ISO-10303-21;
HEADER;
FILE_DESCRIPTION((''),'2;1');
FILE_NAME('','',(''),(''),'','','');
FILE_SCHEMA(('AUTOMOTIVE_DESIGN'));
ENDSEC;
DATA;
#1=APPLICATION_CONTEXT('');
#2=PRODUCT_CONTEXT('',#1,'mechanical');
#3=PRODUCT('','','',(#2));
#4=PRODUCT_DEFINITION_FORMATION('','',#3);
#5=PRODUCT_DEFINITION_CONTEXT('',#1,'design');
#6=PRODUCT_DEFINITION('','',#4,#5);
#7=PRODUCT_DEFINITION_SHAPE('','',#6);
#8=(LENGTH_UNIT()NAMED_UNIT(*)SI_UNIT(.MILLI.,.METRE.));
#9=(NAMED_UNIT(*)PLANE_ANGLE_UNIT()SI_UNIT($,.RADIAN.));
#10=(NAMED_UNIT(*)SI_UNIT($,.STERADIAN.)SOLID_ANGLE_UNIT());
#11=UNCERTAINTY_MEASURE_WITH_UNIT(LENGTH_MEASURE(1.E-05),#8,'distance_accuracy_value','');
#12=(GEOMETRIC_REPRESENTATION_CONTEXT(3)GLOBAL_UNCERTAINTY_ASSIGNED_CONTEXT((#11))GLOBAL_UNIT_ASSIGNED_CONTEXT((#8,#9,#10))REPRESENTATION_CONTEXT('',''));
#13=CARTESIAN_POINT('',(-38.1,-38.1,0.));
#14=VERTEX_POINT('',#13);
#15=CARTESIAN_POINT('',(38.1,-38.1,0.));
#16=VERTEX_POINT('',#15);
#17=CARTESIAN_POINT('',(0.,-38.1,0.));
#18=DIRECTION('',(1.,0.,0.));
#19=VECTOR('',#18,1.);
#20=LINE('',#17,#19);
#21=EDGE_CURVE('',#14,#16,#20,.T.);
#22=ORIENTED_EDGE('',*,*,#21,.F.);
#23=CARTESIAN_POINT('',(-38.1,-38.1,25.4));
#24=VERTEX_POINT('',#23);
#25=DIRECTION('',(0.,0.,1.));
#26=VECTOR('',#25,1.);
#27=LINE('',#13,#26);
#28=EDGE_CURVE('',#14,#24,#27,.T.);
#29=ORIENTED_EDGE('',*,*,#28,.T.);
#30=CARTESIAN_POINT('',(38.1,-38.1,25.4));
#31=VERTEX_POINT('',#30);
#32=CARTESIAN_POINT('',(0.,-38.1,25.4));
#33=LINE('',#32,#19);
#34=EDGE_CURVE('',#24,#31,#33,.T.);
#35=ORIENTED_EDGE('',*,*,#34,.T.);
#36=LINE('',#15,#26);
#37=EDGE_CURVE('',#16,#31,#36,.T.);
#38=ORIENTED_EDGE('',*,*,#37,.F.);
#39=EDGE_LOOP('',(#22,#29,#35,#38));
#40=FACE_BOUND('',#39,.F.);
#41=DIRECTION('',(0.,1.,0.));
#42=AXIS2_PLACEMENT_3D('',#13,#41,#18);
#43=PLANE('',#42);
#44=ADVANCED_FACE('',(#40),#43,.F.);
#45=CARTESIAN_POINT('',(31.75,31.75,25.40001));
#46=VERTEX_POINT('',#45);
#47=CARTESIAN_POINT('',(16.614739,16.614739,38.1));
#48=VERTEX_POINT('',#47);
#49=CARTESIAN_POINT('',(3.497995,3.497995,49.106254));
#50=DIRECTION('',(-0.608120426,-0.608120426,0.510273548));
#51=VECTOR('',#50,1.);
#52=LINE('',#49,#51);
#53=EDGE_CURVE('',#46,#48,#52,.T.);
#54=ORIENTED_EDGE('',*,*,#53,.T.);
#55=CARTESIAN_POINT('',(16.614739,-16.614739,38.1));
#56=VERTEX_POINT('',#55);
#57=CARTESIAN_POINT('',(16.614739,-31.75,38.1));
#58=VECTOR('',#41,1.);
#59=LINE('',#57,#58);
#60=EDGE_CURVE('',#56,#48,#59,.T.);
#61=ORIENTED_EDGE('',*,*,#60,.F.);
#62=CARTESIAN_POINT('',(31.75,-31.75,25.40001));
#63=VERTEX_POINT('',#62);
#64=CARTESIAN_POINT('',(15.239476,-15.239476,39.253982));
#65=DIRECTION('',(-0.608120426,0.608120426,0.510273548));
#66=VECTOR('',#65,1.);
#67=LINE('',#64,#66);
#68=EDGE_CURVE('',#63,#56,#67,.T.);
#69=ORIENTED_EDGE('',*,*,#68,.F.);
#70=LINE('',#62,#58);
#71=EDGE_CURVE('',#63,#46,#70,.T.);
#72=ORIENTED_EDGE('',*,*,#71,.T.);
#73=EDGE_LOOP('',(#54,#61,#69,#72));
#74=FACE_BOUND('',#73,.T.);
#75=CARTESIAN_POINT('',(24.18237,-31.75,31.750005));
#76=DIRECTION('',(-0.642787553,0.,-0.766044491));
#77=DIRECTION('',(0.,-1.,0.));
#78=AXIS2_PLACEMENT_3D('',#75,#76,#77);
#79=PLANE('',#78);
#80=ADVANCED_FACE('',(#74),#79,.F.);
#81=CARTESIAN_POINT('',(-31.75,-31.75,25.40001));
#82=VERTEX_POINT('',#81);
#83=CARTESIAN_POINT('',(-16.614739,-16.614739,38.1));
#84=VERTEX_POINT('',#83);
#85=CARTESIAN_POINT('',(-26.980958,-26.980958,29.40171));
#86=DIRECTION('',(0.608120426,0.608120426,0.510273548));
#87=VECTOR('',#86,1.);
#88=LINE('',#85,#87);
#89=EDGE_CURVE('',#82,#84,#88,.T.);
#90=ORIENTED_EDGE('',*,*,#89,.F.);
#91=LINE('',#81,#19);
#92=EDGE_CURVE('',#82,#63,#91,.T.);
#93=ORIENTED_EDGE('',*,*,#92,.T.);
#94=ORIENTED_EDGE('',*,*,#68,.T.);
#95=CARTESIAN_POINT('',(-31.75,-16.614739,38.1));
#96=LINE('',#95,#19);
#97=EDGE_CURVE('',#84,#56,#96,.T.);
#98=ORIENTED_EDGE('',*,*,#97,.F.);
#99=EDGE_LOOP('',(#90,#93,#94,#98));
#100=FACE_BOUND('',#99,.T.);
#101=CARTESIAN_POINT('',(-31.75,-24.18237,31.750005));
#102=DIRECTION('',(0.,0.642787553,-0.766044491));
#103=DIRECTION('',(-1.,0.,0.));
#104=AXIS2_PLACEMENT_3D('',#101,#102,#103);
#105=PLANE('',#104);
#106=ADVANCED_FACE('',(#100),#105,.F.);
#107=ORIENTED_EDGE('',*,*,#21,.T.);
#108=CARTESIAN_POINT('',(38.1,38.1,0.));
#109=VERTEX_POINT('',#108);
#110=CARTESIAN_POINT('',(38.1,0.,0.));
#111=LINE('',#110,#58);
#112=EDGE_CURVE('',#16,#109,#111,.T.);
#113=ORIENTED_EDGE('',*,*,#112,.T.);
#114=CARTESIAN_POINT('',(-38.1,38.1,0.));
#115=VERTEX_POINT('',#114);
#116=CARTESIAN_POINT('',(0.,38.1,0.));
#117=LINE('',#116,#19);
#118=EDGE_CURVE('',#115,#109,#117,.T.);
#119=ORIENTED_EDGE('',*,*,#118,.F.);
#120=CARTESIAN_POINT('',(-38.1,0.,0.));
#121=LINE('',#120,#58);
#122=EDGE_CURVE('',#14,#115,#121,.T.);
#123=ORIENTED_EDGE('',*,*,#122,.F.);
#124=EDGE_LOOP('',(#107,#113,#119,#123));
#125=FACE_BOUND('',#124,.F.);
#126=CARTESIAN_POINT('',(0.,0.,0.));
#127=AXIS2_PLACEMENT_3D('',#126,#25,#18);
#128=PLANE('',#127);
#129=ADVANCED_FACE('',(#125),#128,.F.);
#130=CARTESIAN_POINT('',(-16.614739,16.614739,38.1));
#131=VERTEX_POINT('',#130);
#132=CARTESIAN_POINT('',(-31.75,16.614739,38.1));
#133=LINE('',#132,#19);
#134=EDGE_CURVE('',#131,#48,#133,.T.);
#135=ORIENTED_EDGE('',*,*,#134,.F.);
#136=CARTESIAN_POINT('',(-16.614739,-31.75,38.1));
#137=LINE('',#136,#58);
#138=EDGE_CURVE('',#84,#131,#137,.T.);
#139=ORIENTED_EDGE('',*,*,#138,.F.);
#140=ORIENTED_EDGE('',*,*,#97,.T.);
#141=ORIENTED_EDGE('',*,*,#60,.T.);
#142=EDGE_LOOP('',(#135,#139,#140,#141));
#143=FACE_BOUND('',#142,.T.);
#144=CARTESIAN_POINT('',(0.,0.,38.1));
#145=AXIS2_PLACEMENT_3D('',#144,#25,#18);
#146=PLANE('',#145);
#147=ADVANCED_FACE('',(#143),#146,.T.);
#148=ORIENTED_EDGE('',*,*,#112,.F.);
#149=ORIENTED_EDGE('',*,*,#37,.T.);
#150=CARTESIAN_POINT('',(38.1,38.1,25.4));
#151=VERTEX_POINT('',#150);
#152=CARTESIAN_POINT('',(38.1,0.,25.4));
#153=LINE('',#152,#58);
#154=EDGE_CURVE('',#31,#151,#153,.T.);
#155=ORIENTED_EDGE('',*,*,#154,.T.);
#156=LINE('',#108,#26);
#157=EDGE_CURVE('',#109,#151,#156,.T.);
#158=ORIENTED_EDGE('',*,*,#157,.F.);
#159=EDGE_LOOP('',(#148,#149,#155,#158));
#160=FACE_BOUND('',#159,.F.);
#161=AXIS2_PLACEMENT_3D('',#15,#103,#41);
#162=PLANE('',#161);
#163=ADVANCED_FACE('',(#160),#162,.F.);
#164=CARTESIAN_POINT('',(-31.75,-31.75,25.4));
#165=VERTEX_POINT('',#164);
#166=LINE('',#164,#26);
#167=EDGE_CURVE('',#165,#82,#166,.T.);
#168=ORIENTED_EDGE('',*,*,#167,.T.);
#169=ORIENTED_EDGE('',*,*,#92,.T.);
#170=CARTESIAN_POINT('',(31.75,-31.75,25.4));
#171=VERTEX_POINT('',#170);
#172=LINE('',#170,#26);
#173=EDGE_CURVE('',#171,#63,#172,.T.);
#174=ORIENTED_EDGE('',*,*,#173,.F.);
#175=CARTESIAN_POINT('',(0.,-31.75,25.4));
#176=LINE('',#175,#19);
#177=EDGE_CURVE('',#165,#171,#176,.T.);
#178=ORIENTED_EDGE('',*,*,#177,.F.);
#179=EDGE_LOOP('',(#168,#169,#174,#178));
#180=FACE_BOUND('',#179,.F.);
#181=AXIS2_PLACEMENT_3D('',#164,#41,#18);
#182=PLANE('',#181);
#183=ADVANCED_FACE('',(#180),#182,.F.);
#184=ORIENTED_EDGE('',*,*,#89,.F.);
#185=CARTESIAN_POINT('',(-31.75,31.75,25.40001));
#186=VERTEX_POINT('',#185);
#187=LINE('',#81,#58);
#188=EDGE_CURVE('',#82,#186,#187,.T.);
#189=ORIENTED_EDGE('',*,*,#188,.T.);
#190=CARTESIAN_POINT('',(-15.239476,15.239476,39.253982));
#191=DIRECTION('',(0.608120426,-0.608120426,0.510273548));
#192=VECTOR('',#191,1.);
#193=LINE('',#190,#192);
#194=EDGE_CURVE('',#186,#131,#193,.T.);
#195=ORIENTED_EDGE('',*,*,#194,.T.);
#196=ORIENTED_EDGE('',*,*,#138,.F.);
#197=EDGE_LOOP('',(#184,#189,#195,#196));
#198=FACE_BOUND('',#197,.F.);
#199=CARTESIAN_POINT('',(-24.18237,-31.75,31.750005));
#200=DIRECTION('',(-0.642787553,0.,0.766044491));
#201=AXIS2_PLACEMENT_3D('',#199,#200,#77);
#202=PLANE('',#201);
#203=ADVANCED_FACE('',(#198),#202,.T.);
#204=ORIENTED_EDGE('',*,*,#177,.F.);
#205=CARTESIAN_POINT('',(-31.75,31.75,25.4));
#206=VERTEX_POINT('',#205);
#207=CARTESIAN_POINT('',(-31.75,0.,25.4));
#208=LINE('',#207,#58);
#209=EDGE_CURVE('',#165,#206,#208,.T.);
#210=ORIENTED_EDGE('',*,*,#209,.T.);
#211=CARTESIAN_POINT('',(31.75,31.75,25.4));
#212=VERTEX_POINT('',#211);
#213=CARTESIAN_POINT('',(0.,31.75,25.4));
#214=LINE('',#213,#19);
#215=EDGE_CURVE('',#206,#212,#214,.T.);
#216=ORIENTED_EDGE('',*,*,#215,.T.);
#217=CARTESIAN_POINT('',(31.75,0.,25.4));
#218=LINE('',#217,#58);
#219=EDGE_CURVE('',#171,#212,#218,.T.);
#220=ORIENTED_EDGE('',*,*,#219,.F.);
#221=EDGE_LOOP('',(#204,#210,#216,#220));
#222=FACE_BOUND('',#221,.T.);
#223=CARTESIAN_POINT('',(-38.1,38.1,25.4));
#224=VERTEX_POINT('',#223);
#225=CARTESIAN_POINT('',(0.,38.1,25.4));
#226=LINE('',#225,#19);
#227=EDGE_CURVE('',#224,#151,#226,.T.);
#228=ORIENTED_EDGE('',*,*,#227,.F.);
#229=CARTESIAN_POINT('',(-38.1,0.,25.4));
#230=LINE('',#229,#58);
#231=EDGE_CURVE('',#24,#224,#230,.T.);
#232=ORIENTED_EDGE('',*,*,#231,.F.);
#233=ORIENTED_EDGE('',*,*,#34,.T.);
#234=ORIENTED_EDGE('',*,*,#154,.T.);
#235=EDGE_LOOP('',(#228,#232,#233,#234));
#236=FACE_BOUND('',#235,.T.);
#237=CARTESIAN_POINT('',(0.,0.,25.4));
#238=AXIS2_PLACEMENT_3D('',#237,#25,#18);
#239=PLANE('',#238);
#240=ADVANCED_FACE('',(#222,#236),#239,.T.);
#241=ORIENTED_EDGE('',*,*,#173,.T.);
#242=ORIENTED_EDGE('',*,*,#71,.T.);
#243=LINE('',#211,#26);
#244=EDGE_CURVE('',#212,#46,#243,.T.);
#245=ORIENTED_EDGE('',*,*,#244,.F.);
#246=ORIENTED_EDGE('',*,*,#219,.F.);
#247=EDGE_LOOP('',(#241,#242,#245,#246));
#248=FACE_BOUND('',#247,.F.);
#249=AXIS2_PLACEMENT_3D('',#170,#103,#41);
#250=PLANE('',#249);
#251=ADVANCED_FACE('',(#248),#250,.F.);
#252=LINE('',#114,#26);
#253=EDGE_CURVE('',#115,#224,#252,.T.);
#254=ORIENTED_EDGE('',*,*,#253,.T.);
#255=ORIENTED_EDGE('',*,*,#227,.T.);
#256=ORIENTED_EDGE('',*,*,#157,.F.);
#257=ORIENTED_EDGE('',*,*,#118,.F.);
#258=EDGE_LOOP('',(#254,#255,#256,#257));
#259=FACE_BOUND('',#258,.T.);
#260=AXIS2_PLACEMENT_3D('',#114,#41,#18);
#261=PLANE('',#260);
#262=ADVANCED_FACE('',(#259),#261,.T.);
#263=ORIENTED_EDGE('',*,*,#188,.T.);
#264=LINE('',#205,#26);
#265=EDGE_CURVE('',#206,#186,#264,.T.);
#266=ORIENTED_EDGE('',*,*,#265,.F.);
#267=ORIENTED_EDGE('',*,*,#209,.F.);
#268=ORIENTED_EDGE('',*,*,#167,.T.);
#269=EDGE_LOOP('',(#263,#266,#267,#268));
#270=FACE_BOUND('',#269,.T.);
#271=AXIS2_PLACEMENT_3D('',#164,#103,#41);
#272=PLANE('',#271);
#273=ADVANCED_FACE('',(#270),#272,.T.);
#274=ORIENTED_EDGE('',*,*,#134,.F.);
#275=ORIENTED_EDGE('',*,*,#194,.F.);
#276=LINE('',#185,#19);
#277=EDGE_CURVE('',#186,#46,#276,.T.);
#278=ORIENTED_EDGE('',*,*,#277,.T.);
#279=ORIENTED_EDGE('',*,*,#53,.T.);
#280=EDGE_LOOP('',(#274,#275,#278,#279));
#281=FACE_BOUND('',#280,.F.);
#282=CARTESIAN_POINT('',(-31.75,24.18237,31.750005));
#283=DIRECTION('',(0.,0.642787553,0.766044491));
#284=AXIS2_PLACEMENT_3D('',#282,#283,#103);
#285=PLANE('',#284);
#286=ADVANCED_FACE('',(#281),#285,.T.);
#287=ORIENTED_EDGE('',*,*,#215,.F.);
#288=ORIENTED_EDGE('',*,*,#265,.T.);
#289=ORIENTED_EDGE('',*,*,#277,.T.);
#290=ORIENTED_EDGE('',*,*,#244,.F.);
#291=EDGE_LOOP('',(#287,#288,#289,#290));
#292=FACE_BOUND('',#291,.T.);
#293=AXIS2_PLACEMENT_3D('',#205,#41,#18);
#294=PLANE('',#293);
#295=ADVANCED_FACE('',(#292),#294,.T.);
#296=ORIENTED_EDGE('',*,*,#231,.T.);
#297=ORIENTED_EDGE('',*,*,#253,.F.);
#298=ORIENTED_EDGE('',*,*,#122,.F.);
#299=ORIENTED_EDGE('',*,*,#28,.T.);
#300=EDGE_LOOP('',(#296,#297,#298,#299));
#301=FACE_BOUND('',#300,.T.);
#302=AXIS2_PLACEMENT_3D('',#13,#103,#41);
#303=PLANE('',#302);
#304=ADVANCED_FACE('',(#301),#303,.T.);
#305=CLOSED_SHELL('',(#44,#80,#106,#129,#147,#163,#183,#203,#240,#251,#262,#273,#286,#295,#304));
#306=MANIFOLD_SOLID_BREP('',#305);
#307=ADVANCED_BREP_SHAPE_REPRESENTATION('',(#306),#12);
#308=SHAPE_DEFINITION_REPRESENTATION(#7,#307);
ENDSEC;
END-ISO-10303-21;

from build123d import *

# Parameters (mm, degrees)
F0_W     = 76.2
F0_H     = 76.2
F1_DEPTH = 25.4
F2_W     = 63.5
F2_H     = 63.5
F3_DEPTH = 12.7
F4_SIZE2 = 15.135261
F4_SIZE  = 12.69999


# Not quite as in the source:
# - a fillet or chamfer is up to 0.001 mm smaller than in the source, because OpenCascade refuses the exact size


with BuildPart() as f1:
    # F0 (on Top) → F1 (new body)
    with BuildSketch(Plane.XY):
        Rectangle(F0_W, F0_H)
    extrude(amount=F1_DEPTH)

    # F2 (on face) → F3 (join)
    with BuildSketch(Plane.XY.offset(25.4)):
        Rectangle(F2_W, F2_H)
    extrude(amount=F3_DEPTH)

    # F4 (size 12.7 and 15.1352706259 in the source; OpenCascade refuses exactly that, so slightly less here)
    f4_edges = [f1.edges().sort_by_distance(p)[0] for p in [
        (0, -31.75, 38.1),
        (-31.75, 0, 38.1),
        (0, 31.75, 38.1),
        (31.75, 0, 38.1),
    ]]
    chamfer(f4_edges, length=F4_SIZE, length2=F4_SIZE2)


solid = f1.part
